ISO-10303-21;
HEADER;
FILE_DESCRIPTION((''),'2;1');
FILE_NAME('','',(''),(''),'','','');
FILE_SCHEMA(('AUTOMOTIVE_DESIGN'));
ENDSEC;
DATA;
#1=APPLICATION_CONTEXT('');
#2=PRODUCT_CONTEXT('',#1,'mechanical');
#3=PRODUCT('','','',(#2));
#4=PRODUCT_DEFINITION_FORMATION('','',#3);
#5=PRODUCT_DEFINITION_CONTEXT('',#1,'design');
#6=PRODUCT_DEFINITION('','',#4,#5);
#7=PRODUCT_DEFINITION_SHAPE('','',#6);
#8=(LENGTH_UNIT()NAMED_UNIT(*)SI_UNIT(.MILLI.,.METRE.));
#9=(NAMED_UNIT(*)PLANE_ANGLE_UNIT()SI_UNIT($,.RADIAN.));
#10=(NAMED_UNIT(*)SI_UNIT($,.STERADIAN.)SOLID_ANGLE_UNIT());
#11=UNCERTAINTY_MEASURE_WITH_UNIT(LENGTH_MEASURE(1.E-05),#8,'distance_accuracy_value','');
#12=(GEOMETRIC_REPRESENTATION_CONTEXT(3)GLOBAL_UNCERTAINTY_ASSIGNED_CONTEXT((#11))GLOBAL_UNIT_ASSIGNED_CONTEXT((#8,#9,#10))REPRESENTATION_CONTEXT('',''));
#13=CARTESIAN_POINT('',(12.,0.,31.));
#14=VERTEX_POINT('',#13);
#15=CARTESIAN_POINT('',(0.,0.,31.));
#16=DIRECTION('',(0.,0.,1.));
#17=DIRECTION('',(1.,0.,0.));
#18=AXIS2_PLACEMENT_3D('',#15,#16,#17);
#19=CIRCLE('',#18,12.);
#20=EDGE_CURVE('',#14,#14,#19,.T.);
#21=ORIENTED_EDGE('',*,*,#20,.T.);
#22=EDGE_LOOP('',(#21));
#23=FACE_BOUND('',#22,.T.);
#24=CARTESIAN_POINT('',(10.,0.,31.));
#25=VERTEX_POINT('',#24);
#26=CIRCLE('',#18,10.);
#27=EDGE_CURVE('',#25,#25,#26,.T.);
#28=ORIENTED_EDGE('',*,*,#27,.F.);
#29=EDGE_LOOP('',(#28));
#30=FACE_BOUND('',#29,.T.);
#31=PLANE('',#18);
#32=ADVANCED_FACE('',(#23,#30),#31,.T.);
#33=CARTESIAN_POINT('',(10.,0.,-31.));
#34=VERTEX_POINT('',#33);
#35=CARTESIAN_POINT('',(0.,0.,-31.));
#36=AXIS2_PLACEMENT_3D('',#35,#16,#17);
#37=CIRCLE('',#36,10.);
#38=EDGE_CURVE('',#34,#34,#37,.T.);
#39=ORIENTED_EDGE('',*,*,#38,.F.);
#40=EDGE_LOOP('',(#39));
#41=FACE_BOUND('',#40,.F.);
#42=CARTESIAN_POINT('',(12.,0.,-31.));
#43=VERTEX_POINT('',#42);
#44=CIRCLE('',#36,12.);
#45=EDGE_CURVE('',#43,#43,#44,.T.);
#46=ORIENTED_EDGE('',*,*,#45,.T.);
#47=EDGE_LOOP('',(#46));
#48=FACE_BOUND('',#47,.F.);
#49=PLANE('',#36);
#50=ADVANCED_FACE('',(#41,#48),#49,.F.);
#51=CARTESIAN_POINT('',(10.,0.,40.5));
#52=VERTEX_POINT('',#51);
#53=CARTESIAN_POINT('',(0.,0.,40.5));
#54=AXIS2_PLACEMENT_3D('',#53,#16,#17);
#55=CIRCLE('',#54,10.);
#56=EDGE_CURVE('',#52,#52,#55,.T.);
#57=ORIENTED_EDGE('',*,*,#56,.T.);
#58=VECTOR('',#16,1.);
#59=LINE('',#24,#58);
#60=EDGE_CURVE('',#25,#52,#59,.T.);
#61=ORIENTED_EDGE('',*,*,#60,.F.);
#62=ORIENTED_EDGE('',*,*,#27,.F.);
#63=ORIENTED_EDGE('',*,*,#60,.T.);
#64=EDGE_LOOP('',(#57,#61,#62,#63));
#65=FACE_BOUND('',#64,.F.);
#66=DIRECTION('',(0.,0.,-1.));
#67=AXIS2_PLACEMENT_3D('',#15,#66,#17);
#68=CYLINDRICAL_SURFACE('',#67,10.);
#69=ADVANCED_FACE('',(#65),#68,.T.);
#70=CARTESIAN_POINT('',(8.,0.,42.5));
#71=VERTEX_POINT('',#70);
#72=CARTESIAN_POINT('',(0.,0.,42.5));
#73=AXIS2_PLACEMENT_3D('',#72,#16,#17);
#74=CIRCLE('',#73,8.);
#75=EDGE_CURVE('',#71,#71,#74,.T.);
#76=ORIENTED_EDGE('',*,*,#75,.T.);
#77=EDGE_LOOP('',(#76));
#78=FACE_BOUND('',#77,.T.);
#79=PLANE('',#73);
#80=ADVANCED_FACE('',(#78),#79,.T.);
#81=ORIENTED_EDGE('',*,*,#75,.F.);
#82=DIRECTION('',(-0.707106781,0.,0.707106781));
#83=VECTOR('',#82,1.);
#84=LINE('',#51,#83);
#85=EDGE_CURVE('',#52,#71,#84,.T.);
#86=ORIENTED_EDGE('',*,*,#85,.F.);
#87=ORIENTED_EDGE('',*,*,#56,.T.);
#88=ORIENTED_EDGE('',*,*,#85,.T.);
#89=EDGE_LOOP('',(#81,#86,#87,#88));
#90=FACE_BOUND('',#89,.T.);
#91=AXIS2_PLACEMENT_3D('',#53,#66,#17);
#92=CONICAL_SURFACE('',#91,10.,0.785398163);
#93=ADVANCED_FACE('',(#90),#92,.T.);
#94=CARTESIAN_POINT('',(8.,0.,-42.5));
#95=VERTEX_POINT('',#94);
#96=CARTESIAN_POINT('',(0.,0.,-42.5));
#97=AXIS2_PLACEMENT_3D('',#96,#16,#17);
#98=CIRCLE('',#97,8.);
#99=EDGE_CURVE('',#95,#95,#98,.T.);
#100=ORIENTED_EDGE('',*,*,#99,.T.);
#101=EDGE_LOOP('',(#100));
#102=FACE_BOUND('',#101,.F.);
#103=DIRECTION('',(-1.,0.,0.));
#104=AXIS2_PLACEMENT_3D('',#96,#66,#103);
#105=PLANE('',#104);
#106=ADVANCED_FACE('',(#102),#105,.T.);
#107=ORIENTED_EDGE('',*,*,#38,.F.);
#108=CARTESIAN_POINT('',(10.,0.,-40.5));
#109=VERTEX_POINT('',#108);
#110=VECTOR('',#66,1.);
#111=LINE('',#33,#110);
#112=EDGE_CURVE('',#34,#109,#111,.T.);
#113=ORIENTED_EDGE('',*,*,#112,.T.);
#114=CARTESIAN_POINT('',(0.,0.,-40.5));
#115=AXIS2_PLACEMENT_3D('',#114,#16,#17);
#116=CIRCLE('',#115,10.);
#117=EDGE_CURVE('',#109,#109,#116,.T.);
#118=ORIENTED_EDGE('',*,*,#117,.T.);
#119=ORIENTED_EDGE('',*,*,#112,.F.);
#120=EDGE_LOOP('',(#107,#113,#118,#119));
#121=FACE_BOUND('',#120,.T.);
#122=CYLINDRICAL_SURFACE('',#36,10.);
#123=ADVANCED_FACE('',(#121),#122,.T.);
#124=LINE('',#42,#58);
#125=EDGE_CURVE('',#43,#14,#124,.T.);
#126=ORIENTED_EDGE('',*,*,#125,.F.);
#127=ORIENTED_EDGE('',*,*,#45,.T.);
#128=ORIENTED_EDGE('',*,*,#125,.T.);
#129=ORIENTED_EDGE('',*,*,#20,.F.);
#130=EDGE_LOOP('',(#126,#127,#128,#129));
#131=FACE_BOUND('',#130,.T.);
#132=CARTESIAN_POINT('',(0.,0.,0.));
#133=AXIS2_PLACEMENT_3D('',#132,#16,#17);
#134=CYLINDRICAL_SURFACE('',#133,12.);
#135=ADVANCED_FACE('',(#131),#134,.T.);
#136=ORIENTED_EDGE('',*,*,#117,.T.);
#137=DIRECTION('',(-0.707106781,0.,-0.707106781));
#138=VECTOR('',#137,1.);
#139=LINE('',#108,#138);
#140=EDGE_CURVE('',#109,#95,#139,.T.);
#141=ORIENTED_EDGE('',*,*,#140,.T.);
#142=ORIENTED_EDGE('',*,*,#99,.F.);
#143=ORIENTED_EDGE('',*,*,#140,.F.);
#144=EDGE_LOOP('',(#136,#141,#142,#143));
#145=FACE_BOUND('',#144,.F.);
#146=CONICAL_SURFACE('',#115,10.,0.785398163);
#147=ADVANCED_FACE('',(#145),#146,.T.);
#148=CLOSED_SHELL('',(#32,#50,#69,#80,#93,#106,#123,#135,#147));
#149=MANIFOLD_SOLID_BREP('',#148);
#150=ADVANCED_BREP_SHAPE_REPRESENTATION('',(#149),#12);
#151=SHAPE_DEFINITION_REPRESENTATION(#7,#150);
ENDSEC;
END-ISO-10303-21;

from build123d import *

# Parameters (mm, degrees)
F0_R     = 12
F1_DEPTH = 31
F2_R     = 10
F3_DEPTH = 11.5
F4_SIZE  = 2


# Not quite as in the source:
# - a pattern or mirror of a feature is missing from the dataset's text; its kind, count and spacing are read off the source's solid


with BuildPart() as f1:
    # F0 (on Top) → F1 (new body, symmetric)
    with BuildSketch(Plane.XY):
        Circle(F0_R)
    extrude(amount=F1_DEPTH, both=True)

    # F2 (on face) → F3 (join)
    with BuildSketch(Plane.XY.offset(31)):
        Circle(F2_R)
    f3 = extrude(amount=F3_DEPTH)

    # F3_copies: F3 across plane
    add(f3.mirror(Plane(origin=(0, 0, 0), x_dir=(-1, 0, 0), z_dir=(0, 0, -1))))

    # F4
    f4_edges = [f1.edges().sort_by_distance(p)[0] for p in [
        (-10, 0, 42.5),
        (-10, 0, -42.5),
    ]]
    chamfer(f4_edges, length=F4_SIZE)


solid = f1.part
